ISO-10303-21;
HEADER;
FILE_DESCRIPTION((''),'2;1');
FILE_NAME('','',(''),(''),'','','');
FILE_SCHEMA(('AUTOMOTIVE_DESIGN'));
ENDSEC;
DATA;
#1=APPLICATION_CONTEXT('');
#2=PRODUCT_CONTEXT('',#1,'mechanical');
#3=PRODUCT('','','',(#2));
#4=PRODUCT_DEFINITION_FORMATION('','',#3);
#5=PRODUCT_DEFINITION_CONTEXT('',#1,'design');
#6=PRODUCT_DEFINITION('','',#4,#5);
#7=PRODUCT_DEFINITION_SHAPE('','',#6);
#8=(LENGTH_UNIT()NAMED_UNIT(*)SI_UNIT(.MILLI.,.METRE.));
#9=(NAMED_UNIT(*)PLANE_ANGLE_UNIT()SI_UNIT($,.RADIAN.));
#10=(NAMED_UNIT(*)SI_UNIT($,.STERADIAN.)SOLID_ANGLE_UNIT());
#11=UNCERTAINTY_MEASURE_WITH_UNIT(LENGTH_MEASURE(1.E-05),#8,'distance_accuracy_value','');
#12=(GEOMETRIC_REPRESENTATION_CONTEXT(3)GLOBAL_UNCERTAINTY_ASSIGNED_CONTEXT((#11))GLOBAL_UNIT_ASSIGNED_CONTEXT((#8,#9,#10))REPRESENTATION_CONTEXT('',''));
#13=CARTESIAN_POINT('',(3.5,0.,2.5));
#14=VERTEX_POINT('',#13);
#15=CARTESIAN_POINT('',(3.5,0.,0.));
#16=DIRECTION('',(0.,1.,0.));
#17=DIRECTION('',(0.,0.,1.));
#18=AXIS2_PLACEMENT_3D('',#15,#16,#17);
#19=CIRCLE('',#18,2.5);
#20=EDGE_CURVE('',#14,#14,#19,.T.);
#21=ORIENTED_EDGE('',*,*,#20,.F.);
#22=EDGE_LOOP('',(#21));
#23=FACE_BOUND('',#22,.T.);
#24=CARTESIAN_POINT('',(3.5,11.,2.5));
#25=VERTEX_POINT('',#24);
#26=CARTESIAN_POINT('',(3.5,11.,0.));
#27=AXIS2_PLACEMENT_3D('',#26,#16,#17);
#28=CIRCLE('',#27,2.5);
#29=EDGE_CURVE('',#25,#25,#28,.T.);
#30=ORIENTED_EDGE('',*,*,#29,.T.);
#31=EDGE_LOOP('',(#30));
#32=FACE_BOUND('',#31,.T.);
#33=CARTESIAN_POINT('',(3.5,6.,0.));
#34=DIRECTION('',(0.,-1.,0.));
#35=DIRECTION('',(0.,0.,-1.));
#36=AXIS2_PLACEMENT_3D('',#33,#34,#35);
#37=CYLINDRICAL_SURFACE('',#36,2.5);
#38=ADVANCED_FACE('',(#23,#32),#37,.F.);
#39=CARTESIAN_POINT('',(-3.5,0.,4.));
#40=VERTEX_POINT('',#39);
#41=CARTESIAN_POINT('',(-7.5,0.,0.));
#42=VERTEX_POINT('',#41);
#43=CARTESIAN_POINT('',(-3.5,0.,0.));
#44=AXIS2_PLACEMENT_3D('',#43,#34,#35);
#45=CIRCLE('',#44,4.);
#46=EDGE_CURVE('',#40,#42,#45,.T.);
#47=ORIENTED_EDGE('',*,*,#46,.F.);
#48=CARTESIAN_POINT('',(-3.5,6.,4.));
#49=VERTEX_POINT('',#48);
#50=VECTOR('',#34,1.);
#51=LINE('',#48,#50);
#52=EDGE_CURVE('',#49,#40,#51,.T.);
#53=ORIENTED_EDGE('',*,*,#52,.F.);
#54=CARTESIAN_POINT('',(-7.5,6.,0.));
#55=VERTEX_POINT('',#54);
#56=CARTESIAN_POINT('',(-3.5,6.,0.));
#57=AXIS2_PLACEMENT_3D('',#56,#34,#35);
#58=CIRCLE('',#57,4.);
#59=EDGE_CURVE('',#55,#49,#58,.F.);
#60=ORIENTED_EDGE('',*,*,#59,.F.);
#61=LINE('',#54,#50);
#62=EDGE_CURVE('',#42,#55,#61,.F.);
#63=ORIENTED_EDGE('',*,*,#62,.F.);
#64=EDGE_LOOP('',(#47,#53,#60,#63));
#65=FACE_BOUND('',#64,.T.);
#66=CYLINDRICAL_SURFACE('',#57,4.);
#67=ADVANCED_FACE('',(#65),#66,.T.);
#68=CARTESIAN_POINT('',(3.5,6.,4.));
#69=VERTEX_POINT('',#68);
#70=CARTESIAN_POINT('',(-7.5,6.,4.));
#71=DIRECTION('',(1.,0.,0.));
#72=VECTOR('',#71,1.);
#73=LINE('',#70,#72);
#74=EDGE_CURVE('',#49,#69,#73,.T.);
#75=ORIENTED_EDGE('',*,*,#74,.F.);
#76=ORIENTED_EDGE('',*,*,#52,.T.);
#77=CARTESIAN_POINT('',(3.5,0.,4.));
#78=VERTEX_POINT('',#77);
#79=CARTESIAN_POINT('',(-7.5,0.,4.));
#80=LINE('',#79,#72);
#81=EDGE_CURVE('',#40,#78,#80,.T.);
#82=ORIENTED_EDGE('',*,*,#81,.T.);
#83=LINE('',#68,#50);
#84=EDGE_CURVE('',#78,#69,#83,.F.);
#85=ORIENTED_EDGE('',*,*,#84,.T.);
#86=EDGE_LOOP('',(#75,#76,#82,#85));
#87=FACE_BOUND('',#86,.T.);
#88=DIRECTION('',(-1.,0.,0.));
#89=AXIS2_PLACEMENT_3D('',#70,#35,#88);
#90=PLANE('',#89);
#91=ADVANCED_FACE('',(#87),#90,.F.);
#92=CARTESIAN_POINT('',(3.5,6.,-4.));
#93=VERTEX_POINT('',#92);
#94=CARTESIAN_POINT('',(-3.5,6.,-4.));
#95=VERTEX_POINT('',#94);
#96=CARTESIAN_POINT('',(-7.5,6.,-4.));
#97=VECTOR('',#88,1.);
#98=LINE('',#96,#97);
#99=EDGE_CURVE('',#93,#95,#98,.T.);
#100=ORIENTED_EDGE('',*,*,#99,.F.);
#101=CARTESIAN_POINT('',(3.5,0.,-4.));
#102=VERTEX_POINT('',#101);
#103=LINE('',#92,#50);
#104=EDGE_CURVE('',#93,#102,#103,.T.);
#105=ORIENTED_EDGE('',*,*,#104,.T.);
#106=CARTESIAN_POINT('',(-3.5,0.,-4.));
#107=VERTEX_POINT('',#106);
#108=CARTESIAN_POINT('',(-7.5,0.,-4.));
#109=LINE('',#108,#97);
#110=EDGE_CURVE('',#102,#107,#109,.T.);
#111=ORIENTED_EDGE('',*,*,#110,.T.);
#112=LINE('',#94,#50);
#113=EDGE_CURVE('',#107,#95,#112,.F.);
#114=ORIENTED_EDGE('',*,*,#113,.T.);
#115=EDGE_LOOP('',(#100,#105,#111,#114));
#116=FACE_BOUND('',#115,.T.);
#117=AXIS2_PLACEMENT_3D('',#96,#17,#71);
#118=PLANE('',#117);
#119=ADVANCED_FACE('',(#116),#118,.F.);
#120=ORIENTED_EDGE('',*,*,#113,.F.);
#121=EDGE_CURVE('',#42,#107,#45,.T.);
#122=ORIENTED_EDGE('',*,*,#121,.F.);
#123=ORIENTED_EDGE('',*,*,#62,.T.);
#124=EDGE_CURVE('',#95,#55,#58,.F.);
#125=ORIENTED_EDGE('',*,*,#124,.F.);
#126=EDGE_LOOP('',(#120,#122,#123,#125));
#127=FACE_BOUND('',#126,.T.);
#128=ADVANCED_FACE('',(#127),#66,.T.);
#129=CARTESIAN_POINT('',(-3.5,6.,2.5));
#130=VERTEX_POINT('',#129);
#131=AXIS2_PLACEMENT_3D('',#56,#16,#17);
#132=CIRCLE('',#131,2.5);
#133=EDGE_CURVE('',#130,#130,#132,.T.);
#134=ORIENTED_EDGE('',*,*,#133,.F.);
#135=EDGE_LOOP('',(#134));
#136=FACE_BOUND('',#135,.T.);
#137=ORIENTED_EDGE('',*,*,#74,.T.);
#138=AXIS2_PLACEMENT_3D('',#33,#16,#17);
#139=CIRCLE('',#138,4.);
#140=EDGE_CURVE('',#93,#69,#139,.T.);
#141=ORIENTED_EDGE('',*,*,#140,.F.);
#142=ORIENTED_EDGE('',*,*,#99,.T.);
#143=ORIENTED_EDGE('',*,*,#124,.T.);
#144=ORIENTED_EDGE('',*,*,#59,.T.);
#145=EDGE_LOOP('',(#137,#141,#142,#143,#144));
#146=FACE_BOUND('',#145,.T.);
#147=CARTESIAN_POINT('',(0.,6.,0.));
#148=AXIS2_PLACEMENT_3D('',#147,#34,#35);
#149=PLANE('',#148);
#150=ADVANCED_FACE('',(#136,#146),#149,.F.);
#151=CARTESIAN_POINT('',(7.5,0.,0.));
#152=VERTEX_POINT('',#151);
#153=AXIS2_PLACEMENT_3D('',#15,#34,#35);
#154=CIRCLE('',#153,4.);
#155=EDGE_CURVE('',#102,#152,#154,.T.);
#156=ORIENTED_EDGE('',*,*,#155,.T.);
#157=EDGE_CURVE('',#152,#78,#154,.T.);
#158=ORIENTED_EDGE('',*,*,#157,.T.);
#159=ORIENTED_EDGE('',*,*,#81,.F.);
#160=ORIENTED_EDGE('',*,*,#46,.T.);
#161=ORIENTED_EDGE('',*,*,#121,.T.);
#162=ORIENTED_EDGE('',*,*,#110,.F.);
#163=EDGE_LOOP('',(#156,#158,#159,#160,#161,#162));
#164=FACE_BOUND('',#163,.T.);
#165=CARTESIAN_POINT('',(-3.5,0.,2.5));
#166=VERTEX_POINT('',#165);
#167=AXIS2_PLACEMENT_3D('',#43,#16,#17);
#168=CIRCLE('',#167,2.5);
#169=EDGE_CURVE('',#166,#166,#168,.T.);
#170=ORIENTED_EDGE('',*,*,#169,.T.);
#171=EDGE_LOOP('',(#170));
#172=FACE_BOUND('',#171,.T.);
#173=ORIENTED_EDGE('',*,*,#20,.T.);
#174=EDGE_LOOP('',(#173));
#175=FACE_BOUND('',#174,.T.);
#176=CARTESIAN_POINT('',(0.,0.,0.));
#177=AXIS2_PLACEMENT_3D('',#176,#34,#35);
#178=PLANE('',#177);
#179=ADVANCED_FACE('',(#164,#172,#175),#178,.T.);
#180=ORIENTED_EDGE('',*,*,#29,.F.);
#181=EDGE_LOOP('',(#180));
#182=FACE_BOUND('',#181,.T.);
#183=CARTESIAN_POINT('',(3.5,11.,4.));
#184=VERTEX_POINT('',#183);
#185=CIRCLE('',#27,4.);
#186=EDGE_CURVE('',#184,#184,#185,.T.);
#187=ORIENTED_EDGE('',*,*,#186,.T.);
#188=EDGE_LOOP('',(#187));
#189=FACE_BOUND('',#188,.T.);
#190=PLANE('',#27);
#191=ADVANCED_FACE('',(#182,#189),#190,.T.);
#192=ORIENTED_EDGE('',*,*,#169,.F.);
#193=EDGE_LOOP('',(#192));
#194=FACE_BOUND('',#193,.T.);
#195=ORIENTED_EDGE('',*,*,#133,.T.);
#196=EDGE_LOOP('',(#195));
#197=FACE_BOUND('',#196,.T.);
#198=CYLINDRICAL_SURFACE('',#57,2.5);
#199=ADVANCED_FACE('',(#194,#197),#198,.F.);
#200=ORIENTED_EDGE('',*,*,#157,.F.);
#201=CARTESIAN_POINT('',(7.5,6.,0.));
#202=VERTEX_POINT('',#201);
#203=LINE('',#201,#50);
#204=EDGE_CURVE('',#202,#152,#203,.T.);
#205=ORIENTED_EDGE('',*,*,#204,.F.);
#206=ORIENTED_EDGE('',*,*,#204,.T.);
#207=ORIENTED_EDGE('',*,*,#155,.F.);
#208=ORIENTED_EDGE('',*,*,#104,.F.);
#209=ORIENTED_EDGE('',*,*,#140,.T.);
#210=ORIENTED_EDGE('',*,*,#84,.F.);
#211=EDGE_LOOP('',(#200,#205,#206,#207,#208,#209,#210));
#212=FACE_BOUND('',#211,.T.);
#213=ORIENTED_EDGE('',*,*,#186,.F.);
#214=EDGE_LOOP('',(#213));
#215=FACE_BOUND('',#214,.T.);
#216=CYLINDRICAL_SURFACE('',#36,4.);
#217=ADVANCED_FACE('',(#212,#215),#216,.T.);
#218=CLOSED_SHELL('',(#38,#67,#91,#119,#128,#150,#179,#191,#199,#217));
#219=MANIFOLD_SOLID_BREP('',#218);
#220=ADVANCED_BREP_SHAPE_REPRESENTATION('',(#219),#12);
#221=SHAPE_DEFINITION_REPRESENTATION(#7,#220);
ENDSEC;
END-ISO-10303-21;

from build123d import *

# Parameters (mm, degrees)
SKETCH1_W           = 15
SKETCH1_H           = 8
SKETCH1_R           = 2.5
BOSS_EXTRUDE1_DEPTH = 6
FILLET1_R           = 4
SKETCH2_R           = 4
BOSS_EXTRUDE2_DEPTH = 5
SKETCH4_R           = 2.5
CUT_EXTRUDE1_DEPTH  = 25


with BuildPart() as part:
    # Sketch1 → Boss-Extrude1 (new body)
    with BuildSketch(Plane(origin=(0, 0, 0), x_dir=(1, 0, 0), z_dir=(0, 1, 0))):
        Rectangle(SKETCH1_W, SKETCH1_H)
        with Locations(Location((-3.5, 0, 0), (0, 0, 270))):
            Circle(SKETCH1_R, mode=Mode.SUBTRACT)
        with Locations(Location((3.5, 0, 0), (0, 0, 270))):
            Circle(SKETCH1_R, mode=Mode.SUBTRACT)
    extrude(amount=BOSS_EXTRUDE1_DEPTH)

    # Fillet1
    fillet1_edges = [part.edges().sort_by_distance(p)[0] for p in [
        (-7.5, 3, -4),
        (7.5, 3, -4),
        (7.5, 3, 4),
        (-7.5, 3, 4),
    ]]
    fillet(fillet1_edges, radius=FILLET1_R - 0.0001)  # a hair under: the kernel refuses the full size

    # Sketch2 → Boss-Extrude2 (add)
    with BuildSketch(Plane(origin=(0, 6, 0), x_dir=(1, 0, 0), z_dir=(0, 1, 0))):
        with Locations(Location((3.5, 0, 0), (0, 0, 270))):
            Circle(SKETCH2_R)
    extrude(amount=BOSS_EXTRUDE2_DEPTH)

    # Sketch4 → Cut-Extrude1 (cut)
    with BuildSketch(Plane.XZ.offset(-6)):
        with Locations(Location((3.5, 0, 0), (0, 0, 90))):
            Circle(SKETCH4_R)
    extrude(amount=-CUT_EXTRUDE1_DEPTH, mode=Mode.SUBTRACT)


solid = part.part
